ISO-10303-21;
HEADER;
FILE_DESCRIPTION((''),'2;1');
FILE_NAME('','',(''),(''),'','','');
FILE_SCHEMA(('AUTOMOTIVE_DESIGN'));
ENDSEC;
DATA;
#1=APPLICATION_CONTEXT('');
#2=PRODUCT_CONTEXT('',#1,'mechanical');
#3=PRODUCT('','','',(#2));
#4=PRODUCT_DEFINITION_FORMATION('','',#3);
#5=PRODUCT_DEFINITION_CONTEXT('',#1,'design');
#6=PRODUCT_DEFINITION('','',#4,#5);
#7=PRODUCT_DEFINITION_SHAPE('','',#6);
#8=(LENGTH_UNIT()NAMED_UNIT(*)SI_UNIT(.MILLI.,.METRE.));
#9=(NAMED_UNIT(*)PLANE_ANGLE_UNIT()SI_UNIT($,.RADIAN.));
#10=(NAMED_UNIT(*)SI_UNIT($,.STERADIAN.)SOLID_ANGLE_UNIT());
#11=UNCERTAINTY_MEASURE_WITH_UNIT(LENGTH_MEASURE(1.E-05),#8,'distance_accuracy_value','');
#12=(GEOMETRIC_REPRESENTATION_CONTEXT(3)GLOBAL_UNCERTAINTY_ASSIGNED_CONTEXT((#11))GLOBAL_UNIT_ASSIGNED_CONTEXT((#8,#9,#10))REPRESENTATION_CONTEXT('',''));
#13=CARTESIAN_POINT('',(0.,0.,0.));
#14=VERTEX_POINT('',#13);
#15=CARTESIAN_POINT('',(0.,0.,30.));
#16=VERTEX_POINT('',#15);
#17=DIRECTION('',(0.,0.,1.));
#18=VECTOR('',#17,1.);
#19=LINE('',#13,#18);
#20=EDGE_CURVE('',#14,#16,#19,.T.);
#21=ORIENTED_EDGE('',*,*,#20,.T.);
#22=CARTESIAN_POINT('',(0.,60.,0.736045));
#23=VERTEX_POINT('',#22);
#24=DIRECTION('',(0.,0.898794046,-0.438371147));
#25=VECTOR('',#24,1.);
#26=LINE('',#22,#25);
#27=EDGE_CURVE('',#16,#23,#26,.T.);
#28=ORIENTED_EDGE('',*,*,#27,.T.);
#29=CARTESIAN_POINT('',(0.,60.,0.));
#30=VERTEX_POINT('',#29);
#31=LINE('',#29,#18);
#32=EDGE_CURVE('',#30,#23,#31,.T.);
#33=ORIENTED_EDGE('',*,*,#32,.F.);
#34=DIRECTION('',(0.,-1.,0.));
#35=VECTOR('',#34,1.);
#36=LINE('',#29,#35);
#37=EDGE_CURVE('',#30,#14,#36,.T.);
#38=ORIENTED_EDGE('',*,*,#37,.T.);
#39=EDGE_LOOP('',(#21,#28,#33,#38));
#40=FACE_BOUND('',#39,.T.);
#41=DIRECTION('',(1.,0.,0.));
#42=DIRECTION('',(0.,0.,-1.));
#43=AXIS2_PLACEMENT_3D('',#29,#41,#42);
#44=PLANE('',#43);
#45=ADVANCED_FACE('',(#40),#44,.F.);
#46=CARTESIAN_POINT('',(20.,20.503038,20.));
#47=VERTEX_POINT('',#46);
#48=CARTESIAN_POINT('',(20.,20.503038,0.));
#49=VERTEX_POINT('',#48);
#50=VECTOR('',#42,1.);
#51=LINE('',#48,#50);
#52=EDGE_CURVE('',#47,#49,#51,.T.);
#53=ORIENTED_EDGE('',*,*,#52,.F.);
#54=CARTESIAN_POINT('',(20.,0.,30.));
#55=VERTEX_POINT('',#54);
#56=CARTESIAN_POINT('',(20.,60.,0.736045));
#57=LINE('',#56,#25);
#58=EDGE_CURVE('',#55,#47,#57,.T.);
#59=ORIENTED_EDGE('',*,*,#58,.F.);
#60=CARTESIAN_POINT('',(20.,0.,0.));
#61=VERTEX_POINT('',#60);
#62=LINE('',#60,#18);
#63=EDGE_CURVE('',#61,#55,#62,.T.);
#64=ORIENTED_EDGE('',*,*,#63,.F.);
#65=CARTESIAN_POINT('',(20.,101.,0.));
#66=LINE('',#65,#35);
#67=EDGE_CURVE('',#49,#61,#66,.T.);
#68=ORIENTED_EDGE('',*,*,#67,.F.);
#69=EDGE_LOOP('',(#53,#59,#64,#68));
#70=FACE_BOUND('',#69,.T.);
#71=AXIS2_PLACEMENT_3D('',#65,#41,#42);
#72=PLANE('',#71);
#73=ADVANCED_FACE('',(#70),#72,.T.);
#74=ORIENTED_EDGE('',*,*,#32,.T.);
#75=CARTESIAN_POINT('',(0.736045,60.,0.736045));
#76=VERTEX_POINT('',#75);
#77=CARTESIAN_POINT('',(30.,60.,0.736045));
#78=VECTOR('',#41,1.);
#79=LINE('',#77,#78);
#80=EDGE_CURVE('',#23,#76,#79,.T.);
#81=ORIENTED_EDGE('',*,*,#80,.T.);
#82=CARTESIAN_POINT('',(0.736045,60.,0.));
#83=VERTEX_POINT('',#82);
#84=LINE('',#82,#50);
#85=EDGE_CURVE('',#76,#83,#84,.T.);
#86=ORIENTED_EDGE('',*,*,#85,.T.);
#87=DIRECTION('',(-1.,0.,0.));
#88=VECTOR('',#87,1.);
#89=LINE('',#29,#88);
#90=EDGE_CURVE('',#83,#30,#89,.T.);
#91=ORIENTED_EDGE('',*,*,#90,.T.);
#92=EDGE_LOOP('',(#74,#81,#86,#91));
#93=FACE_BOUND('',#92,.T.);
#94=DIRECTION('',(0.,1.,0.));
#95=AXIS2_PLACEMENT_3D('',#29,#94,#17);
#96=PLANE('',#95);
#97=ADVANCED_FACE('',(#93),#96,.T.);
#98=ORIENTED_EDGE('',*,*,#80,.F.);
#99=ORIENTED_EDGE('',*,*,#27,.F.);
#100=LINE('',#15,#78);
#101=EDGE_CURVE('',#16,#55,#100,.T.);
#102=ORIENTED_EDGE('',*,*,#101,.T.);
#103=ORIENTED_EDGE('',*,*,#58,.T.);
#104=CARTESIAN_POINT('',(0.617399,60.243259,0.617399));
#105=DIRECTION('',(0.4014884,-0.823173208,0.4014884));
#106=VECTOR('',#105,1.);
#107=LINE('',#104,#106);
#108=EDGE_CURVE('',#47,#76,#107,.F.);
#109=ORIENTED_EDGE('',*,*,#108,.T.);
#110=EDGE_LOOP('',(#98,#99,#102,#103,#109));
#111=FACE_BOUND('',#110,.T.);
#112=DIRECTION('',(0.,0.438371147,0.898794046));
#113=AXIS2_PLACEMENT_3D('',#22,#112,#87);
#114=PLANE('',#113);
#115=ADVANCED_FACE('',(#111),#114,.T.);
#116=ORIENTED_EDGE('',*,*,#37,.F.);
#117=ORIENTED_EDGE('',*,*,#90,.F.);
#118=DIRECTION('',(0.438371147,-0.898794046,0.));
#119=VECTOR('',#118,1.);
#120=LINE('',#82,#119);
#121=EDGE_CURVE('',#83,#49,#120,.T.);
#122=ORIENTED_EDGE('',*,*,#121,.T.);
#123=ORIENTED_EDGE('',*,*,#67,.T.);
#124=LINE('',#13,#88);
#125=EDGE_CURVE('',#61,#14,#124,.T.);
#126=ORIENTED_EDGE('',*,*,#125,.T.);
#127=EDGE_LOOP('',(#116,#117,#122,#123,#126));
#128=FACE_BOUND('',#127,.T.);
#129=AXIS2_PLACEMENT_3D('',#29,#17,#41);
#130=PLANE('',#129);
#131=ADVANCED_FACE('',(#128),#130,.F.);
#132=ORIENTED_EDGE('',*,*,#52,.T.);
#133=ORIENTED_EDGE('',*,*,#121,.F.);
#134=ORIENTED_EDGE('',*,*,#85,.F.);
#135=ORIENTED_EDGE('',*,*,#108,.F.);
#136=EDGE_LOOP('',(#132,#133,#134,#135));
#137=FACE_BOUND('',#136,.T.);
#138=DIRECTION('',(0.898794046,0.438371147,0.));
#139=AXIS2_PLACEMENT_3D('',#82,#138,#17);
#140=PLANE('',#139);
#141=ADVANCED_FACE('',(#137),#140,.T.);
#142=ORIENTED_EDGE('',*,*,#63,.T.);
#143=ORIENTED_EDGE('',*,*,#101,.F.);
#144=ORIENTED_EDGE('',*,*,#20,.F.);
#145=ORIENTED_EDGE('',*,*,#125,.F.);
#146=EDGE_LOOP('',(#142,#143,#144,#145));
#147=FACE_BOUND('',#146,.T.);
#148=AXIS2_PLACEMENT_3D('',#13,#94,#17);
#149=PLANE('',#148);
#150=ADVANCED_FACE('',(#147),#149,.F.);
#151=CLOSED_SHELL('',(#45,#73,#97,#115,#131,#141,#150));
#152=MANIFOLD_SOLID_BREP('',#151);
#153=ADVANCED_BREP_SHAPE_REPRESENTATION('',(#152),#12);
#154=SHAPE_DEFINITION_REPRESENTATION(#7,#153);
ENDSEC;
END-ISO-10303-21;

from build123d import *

# Parameters (mm, degrees)
SKETCH1_W           = 30
SKETCH1_H           = 30
BOSS_EXTRUDE1_DEPTH = 60
CHAMFER1_SIZE       = 60
CHAMFER1_SIZE_2     = 29.263955314
SKETCH2_W           = 10
SKETCH2_H           = 30
CUT_EXTRUDE1_DEPTH  = 101


with BuildPart() as part:
    # Sketch1 → Boss-Extrude1 (new body)
    with BuildSketch(Plane(origin=(0, 0, 0), x_dir=(1, 0, 0), z_dir=(0, 1, 0))):
        with Locations((15, -15)):
            Rectangle(SKETCH1_W, SKETCH1_H)
    extrude(amount=BOSS_EXTRUDE1_DEPTH)

    # Chamfer1
    # the kernel refuses this chamfer: 60, 29.263955314 mm, written as the material it takes off along each edge
    with BuildSketch(Plane(origin=(30, 60, -155.415022708), x_dir=(0.01692389084982915, -0.999856780703368, 0), z_dir=(0, 0, 1)), Plane(origin=(185.415022708, 60, 30), x_dir=(0, -0.999856780703368, 0.01692389084982915), z_dir=(-1, 0, 0))) as chamfer1_piece_1:
        Polygon((CHAMFER1_SIZE * 0.999856780703, -CHAMFER1_SIZE * 0.0169238908498), (-CHAMFER1_SIZE_2 * 0.0169238908498, -CHAMFER1_SIZE_2 * 0.999856780702), (0, 0), align=None)
    extrude(amount=340.830045416, mode=Mode.SUBTRACT)

    # Sketch2 → Cut-Extrude1 (cut)
    with BuildSketch(Plane(origin=(0, 0, 0), x_dir=(1, 0, 0), z_dir=(0, 1, 0))):
        with Locations((25, -15)):
            Rectangle(SKETCH2_W, SKETCH2_H)
    extrude(amount=CUT_EXTRUDE1_DEPTH, mode=Mode.SUBTRACT)


solid = part.part
